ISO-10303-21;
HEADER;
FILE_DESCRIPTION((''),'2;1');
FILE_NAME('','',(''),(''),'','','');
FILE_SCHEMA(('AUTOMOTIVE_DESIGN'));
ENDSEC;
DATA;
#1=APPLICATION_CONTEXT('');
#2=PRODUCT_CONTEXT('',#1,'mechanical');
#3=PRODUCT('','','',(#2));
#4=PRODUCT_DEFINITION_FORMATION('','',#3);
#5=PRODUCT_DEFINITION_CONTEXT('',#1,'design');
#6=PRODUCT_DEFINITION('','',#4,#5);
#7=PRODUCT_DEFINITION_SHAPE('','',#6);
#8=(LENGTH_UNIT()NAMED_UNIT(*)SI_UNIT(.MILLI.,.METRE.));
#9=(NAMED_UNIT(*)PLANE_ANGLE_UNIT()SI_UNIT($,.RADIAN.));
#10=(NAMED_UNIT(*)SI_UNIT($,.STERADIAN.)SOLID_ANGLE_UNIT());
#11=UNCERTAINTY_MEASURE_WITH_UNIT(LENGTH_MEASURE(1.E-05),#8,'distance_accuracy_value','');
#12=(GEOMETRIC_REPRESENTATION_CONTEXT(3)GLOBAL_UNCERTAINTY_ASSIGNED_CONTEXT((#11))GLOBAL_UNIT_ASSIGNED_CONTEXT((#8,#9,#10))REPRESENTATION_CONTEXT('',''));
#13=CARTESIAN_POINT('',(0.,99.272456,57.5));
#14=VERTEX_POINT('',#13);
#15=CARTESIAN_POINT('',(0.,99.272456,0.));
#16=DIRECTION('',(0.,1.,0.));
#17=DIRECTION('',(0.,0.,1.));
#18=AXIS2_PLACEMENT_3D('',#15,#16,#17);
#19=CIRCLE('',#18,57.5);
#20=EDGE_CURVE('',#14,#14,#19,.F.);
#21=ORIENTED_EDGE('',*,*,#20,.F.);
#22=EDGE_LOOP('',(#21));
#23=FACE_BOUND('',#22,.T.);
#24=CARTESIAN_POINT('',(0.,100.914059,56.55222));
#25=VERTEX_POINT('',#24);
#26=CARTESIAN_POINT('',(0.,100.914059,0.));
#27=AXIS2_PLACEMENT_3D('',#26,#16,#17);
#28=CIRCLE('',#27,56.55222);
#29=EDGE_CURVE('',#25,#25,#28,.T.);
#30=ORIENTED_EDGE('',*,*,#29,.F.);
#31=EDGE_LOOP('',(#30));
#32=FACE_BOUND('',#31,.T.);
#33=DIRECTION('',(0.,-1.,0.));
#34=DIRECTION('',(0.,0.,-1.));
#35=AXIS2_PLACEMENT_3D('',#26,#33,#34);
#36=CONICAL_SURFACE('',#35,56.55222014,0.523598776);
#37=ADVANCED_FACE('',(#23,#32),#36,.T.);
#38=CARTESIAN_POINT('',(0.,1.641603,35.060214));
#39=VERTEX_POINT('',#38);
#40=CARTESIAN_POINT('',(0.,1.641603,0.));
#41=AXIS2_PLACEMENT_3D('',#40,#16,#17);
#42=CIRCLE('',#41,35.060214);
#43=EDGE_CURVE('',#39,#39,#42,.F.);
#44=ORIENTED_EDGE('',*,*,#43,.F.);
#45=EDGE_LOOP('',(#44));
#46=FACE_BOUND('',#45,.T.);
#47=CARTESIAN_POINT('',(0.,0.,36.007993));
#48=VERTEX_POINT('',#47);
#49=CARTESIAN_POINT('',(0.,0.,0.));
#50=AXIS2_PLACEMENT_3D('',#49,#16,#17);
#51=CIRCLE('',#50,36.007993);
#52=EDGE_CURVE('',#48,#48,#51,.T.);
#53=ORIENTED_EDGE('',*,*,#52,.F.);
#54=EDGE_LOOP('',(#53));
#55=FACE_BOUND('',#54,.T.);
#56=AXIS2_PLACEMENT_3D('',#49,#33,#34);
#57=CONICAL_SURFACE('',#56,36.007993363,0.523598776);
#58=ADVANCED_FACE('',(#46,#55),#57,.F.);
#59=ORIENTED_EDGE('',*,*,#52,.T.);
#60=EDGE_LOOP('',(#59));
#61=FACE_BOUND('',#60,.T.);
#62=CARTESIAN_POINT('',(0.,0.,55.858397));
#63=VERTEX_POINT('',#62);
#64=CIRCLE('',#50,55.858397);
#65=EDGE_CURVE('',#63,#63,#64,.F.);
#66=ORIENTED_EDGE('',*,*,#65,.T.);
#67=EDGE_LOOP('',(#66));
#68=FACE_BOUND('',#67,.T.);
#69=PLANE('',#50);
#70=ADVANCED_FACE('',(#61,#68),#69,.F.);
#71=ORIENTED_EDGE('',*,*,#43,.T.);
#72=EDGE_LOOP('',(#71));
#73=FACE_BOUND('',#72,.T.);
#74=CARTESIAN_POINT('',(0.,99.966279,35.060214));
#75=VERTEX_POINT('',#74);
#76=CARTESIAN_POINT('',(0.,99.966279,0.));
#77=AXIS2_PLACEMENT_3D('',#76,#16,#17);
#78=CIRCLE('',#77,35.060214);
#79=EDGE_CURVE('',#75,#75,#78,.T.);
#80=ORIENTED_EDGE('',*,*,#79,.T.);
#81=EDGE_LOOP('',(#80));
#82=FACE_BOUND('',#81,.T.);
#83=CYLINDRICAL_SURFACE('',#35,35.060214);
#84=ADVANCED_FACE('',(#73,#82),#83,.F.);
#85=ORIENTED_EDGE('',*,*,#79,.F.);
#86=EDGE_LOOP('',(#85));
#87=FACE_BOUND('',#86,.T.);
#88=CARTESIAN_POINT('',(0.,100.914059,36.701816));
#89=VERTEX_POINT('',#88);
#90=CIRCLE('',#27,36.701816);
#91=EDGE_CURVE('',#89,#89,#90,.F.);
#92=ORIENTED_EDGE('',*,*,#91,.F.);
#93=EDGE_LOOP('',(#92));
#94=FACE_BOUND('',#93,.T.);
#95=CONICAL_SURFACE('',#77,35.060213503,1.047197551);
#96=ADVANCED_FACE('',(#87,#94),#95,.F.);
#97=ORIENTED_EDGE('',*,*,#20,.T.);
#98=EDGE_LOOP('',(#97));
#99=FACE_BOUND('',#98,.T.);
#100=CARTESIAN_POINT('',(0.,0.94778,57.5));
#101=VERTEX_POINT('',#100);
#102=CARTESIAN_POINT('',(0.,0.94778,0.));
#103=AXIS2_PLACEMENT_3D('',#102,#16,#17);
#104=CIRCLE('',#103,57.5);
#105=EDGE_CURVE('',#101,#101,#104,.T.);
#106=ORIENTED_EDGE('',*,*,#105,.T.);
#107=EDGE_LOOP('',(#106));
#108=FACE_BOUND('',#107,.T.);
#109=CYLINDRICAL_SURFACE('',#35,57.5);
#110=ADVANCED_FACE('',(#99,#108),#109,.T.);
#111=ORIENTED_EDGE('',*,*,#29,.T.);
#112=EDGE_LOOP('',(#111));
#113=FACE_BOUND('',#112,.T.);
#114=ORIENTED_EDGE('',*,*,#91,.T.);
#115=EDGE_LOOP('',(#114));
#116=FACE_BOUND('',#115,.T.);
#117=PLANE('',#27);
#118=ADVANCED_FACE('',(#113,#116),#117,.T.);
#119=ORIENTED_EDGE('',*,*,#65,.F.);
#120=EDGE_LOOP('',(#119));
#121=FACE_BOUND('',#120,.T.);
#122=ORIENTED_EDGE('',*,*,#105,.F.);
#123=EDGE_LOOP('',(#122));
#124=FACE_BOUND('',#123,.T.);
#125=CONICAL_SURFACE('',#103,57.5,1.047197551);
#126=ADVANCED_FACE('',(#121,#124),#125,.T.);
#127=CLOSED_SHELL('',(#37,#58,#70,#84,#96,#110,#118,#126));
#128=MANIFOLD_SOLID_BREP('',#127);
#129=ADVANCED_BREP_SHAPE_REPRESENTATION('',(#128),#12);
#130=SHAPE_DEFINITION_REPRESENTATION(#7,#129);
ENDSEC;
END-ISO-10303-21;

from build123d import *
from OCP.BRepFilletAPI import BRepFilletAPI_MakeChamfer

# Parameters (mm, degrees)
SKETCH1_R           = 57.5
BOSS_EXTRUDE1_DEPTH = 100.914058663
SKETCH2_R           = 35.060213503
CUT_EXTRUDE1_DEPTH  = 130.599950755
CHAMFER1_SIZE       = 1.641602872
CHAMFER1_SIZE2      = 0.94777986


with BuildPart() as part:
    # Sketch1 → Boss-Extrude1 (new body)
    with BuildSketch(Plane(origin=(0, 0, 0), x_dir=(1, 0, 0), z_dir=(0, 1, 0))):
        Circle(SKETCH1_R)
    extrude(amount=BOSS_EXTRUDE1_DEPTH)

    # Sketch2 → Cut-Extrude1 (cut, through all)
    with BuildSketch(Plane(origin=(0, 0, 0), x_dir=(1, 0, 0), z_dir=(0, 1, 0))):
        Circle(SKETCH2_R)
    extrude(amount=CUT_EXTRUDE1_DEPTH, mode=Mode.SUBTRACT)

    # Chamfer1: one chamfer whose edges measure the first distance from different faces: ONE call of the kernel's chamfer builder (chamfer() names one face for all edges)
    chamfer1_edges_1 = [part.edges().sort_by_distance(p)[0] for p in [
        (-35.060213503, 100.914058663, 0),
    ]]
    chamfer1_side_1 = [part.faces().sort_by_distance(p)[0] for p in [
        (-55.873654403, 100.914058663, 0),
    ]]
    chamfer1_edges_2 = [part.edges().sort_by_distance(p)[0] for p in [
        (-35.060213503, 0, 0),
    ]]
    chamfer1_side_2 = [part.faces().sort_by_distance(p)[0] for p in [
        (-35.060213503, 50.457029331, 0),
    ]]
    chamfer1_edges_3 = [part.edges().sort_by_distance(p)[0] for p in [
        (-57.5, 0, 0),
    ]]
    chamfer1_side_3 = [part.faces().sort_by_distance(p)[0] for p in [
        (-55.873654403, 0, 0),
    ]]
    chamfer1_edges_4 = [part.edges().sort_by_distance(p)[0] for p in [
        (-57.5, 100.914058663, 0),
    ]]
    chamfer1_side_4 = [part.faces().sort_by_distance(p)[0] for p in [
        (-57.5, 50.457029331, 0),
    ]]
    chamfer1 = BRepFilletAPI_MakeChamfer(part.part.solid().wrapped)
    for e in chamfer1_edges_1:
        chamfer1.Add(CHAMFER1_SIZE, CHAMFER1_SIZE2, e.wrapped, chamfer1_side_1[0].wrapped)  # the first distance lies on this face
    for e in chamfer1_edges_2:
        chamfer1.Add(CHAMFER1_SIZE, CHAMFER1_SIZE2, e.wrapped, chamfer1_side_2[0].wrapped)  # the first distance lies on this face
    for e in chamfer1_edges_3:
        chamfer1.Add(CHAMFER1_SIZE, CHAMFER1_SIZE2, e.wrapped, chamfer1_side_3[0].wrapped)  # the first distance lies on this face
    for e in chamfer1_edges_4:
        chamfer1.Add(CHAMFER1_SIZE, CHAMFER1_SIZE2, e.wrapped, chamfer1_side_4[0].wrapped)  # the first distance lies on this face
    add(Compound.cast(chamfer1.Shape()), mode=Mode.REPLACE)


solid = part.part
